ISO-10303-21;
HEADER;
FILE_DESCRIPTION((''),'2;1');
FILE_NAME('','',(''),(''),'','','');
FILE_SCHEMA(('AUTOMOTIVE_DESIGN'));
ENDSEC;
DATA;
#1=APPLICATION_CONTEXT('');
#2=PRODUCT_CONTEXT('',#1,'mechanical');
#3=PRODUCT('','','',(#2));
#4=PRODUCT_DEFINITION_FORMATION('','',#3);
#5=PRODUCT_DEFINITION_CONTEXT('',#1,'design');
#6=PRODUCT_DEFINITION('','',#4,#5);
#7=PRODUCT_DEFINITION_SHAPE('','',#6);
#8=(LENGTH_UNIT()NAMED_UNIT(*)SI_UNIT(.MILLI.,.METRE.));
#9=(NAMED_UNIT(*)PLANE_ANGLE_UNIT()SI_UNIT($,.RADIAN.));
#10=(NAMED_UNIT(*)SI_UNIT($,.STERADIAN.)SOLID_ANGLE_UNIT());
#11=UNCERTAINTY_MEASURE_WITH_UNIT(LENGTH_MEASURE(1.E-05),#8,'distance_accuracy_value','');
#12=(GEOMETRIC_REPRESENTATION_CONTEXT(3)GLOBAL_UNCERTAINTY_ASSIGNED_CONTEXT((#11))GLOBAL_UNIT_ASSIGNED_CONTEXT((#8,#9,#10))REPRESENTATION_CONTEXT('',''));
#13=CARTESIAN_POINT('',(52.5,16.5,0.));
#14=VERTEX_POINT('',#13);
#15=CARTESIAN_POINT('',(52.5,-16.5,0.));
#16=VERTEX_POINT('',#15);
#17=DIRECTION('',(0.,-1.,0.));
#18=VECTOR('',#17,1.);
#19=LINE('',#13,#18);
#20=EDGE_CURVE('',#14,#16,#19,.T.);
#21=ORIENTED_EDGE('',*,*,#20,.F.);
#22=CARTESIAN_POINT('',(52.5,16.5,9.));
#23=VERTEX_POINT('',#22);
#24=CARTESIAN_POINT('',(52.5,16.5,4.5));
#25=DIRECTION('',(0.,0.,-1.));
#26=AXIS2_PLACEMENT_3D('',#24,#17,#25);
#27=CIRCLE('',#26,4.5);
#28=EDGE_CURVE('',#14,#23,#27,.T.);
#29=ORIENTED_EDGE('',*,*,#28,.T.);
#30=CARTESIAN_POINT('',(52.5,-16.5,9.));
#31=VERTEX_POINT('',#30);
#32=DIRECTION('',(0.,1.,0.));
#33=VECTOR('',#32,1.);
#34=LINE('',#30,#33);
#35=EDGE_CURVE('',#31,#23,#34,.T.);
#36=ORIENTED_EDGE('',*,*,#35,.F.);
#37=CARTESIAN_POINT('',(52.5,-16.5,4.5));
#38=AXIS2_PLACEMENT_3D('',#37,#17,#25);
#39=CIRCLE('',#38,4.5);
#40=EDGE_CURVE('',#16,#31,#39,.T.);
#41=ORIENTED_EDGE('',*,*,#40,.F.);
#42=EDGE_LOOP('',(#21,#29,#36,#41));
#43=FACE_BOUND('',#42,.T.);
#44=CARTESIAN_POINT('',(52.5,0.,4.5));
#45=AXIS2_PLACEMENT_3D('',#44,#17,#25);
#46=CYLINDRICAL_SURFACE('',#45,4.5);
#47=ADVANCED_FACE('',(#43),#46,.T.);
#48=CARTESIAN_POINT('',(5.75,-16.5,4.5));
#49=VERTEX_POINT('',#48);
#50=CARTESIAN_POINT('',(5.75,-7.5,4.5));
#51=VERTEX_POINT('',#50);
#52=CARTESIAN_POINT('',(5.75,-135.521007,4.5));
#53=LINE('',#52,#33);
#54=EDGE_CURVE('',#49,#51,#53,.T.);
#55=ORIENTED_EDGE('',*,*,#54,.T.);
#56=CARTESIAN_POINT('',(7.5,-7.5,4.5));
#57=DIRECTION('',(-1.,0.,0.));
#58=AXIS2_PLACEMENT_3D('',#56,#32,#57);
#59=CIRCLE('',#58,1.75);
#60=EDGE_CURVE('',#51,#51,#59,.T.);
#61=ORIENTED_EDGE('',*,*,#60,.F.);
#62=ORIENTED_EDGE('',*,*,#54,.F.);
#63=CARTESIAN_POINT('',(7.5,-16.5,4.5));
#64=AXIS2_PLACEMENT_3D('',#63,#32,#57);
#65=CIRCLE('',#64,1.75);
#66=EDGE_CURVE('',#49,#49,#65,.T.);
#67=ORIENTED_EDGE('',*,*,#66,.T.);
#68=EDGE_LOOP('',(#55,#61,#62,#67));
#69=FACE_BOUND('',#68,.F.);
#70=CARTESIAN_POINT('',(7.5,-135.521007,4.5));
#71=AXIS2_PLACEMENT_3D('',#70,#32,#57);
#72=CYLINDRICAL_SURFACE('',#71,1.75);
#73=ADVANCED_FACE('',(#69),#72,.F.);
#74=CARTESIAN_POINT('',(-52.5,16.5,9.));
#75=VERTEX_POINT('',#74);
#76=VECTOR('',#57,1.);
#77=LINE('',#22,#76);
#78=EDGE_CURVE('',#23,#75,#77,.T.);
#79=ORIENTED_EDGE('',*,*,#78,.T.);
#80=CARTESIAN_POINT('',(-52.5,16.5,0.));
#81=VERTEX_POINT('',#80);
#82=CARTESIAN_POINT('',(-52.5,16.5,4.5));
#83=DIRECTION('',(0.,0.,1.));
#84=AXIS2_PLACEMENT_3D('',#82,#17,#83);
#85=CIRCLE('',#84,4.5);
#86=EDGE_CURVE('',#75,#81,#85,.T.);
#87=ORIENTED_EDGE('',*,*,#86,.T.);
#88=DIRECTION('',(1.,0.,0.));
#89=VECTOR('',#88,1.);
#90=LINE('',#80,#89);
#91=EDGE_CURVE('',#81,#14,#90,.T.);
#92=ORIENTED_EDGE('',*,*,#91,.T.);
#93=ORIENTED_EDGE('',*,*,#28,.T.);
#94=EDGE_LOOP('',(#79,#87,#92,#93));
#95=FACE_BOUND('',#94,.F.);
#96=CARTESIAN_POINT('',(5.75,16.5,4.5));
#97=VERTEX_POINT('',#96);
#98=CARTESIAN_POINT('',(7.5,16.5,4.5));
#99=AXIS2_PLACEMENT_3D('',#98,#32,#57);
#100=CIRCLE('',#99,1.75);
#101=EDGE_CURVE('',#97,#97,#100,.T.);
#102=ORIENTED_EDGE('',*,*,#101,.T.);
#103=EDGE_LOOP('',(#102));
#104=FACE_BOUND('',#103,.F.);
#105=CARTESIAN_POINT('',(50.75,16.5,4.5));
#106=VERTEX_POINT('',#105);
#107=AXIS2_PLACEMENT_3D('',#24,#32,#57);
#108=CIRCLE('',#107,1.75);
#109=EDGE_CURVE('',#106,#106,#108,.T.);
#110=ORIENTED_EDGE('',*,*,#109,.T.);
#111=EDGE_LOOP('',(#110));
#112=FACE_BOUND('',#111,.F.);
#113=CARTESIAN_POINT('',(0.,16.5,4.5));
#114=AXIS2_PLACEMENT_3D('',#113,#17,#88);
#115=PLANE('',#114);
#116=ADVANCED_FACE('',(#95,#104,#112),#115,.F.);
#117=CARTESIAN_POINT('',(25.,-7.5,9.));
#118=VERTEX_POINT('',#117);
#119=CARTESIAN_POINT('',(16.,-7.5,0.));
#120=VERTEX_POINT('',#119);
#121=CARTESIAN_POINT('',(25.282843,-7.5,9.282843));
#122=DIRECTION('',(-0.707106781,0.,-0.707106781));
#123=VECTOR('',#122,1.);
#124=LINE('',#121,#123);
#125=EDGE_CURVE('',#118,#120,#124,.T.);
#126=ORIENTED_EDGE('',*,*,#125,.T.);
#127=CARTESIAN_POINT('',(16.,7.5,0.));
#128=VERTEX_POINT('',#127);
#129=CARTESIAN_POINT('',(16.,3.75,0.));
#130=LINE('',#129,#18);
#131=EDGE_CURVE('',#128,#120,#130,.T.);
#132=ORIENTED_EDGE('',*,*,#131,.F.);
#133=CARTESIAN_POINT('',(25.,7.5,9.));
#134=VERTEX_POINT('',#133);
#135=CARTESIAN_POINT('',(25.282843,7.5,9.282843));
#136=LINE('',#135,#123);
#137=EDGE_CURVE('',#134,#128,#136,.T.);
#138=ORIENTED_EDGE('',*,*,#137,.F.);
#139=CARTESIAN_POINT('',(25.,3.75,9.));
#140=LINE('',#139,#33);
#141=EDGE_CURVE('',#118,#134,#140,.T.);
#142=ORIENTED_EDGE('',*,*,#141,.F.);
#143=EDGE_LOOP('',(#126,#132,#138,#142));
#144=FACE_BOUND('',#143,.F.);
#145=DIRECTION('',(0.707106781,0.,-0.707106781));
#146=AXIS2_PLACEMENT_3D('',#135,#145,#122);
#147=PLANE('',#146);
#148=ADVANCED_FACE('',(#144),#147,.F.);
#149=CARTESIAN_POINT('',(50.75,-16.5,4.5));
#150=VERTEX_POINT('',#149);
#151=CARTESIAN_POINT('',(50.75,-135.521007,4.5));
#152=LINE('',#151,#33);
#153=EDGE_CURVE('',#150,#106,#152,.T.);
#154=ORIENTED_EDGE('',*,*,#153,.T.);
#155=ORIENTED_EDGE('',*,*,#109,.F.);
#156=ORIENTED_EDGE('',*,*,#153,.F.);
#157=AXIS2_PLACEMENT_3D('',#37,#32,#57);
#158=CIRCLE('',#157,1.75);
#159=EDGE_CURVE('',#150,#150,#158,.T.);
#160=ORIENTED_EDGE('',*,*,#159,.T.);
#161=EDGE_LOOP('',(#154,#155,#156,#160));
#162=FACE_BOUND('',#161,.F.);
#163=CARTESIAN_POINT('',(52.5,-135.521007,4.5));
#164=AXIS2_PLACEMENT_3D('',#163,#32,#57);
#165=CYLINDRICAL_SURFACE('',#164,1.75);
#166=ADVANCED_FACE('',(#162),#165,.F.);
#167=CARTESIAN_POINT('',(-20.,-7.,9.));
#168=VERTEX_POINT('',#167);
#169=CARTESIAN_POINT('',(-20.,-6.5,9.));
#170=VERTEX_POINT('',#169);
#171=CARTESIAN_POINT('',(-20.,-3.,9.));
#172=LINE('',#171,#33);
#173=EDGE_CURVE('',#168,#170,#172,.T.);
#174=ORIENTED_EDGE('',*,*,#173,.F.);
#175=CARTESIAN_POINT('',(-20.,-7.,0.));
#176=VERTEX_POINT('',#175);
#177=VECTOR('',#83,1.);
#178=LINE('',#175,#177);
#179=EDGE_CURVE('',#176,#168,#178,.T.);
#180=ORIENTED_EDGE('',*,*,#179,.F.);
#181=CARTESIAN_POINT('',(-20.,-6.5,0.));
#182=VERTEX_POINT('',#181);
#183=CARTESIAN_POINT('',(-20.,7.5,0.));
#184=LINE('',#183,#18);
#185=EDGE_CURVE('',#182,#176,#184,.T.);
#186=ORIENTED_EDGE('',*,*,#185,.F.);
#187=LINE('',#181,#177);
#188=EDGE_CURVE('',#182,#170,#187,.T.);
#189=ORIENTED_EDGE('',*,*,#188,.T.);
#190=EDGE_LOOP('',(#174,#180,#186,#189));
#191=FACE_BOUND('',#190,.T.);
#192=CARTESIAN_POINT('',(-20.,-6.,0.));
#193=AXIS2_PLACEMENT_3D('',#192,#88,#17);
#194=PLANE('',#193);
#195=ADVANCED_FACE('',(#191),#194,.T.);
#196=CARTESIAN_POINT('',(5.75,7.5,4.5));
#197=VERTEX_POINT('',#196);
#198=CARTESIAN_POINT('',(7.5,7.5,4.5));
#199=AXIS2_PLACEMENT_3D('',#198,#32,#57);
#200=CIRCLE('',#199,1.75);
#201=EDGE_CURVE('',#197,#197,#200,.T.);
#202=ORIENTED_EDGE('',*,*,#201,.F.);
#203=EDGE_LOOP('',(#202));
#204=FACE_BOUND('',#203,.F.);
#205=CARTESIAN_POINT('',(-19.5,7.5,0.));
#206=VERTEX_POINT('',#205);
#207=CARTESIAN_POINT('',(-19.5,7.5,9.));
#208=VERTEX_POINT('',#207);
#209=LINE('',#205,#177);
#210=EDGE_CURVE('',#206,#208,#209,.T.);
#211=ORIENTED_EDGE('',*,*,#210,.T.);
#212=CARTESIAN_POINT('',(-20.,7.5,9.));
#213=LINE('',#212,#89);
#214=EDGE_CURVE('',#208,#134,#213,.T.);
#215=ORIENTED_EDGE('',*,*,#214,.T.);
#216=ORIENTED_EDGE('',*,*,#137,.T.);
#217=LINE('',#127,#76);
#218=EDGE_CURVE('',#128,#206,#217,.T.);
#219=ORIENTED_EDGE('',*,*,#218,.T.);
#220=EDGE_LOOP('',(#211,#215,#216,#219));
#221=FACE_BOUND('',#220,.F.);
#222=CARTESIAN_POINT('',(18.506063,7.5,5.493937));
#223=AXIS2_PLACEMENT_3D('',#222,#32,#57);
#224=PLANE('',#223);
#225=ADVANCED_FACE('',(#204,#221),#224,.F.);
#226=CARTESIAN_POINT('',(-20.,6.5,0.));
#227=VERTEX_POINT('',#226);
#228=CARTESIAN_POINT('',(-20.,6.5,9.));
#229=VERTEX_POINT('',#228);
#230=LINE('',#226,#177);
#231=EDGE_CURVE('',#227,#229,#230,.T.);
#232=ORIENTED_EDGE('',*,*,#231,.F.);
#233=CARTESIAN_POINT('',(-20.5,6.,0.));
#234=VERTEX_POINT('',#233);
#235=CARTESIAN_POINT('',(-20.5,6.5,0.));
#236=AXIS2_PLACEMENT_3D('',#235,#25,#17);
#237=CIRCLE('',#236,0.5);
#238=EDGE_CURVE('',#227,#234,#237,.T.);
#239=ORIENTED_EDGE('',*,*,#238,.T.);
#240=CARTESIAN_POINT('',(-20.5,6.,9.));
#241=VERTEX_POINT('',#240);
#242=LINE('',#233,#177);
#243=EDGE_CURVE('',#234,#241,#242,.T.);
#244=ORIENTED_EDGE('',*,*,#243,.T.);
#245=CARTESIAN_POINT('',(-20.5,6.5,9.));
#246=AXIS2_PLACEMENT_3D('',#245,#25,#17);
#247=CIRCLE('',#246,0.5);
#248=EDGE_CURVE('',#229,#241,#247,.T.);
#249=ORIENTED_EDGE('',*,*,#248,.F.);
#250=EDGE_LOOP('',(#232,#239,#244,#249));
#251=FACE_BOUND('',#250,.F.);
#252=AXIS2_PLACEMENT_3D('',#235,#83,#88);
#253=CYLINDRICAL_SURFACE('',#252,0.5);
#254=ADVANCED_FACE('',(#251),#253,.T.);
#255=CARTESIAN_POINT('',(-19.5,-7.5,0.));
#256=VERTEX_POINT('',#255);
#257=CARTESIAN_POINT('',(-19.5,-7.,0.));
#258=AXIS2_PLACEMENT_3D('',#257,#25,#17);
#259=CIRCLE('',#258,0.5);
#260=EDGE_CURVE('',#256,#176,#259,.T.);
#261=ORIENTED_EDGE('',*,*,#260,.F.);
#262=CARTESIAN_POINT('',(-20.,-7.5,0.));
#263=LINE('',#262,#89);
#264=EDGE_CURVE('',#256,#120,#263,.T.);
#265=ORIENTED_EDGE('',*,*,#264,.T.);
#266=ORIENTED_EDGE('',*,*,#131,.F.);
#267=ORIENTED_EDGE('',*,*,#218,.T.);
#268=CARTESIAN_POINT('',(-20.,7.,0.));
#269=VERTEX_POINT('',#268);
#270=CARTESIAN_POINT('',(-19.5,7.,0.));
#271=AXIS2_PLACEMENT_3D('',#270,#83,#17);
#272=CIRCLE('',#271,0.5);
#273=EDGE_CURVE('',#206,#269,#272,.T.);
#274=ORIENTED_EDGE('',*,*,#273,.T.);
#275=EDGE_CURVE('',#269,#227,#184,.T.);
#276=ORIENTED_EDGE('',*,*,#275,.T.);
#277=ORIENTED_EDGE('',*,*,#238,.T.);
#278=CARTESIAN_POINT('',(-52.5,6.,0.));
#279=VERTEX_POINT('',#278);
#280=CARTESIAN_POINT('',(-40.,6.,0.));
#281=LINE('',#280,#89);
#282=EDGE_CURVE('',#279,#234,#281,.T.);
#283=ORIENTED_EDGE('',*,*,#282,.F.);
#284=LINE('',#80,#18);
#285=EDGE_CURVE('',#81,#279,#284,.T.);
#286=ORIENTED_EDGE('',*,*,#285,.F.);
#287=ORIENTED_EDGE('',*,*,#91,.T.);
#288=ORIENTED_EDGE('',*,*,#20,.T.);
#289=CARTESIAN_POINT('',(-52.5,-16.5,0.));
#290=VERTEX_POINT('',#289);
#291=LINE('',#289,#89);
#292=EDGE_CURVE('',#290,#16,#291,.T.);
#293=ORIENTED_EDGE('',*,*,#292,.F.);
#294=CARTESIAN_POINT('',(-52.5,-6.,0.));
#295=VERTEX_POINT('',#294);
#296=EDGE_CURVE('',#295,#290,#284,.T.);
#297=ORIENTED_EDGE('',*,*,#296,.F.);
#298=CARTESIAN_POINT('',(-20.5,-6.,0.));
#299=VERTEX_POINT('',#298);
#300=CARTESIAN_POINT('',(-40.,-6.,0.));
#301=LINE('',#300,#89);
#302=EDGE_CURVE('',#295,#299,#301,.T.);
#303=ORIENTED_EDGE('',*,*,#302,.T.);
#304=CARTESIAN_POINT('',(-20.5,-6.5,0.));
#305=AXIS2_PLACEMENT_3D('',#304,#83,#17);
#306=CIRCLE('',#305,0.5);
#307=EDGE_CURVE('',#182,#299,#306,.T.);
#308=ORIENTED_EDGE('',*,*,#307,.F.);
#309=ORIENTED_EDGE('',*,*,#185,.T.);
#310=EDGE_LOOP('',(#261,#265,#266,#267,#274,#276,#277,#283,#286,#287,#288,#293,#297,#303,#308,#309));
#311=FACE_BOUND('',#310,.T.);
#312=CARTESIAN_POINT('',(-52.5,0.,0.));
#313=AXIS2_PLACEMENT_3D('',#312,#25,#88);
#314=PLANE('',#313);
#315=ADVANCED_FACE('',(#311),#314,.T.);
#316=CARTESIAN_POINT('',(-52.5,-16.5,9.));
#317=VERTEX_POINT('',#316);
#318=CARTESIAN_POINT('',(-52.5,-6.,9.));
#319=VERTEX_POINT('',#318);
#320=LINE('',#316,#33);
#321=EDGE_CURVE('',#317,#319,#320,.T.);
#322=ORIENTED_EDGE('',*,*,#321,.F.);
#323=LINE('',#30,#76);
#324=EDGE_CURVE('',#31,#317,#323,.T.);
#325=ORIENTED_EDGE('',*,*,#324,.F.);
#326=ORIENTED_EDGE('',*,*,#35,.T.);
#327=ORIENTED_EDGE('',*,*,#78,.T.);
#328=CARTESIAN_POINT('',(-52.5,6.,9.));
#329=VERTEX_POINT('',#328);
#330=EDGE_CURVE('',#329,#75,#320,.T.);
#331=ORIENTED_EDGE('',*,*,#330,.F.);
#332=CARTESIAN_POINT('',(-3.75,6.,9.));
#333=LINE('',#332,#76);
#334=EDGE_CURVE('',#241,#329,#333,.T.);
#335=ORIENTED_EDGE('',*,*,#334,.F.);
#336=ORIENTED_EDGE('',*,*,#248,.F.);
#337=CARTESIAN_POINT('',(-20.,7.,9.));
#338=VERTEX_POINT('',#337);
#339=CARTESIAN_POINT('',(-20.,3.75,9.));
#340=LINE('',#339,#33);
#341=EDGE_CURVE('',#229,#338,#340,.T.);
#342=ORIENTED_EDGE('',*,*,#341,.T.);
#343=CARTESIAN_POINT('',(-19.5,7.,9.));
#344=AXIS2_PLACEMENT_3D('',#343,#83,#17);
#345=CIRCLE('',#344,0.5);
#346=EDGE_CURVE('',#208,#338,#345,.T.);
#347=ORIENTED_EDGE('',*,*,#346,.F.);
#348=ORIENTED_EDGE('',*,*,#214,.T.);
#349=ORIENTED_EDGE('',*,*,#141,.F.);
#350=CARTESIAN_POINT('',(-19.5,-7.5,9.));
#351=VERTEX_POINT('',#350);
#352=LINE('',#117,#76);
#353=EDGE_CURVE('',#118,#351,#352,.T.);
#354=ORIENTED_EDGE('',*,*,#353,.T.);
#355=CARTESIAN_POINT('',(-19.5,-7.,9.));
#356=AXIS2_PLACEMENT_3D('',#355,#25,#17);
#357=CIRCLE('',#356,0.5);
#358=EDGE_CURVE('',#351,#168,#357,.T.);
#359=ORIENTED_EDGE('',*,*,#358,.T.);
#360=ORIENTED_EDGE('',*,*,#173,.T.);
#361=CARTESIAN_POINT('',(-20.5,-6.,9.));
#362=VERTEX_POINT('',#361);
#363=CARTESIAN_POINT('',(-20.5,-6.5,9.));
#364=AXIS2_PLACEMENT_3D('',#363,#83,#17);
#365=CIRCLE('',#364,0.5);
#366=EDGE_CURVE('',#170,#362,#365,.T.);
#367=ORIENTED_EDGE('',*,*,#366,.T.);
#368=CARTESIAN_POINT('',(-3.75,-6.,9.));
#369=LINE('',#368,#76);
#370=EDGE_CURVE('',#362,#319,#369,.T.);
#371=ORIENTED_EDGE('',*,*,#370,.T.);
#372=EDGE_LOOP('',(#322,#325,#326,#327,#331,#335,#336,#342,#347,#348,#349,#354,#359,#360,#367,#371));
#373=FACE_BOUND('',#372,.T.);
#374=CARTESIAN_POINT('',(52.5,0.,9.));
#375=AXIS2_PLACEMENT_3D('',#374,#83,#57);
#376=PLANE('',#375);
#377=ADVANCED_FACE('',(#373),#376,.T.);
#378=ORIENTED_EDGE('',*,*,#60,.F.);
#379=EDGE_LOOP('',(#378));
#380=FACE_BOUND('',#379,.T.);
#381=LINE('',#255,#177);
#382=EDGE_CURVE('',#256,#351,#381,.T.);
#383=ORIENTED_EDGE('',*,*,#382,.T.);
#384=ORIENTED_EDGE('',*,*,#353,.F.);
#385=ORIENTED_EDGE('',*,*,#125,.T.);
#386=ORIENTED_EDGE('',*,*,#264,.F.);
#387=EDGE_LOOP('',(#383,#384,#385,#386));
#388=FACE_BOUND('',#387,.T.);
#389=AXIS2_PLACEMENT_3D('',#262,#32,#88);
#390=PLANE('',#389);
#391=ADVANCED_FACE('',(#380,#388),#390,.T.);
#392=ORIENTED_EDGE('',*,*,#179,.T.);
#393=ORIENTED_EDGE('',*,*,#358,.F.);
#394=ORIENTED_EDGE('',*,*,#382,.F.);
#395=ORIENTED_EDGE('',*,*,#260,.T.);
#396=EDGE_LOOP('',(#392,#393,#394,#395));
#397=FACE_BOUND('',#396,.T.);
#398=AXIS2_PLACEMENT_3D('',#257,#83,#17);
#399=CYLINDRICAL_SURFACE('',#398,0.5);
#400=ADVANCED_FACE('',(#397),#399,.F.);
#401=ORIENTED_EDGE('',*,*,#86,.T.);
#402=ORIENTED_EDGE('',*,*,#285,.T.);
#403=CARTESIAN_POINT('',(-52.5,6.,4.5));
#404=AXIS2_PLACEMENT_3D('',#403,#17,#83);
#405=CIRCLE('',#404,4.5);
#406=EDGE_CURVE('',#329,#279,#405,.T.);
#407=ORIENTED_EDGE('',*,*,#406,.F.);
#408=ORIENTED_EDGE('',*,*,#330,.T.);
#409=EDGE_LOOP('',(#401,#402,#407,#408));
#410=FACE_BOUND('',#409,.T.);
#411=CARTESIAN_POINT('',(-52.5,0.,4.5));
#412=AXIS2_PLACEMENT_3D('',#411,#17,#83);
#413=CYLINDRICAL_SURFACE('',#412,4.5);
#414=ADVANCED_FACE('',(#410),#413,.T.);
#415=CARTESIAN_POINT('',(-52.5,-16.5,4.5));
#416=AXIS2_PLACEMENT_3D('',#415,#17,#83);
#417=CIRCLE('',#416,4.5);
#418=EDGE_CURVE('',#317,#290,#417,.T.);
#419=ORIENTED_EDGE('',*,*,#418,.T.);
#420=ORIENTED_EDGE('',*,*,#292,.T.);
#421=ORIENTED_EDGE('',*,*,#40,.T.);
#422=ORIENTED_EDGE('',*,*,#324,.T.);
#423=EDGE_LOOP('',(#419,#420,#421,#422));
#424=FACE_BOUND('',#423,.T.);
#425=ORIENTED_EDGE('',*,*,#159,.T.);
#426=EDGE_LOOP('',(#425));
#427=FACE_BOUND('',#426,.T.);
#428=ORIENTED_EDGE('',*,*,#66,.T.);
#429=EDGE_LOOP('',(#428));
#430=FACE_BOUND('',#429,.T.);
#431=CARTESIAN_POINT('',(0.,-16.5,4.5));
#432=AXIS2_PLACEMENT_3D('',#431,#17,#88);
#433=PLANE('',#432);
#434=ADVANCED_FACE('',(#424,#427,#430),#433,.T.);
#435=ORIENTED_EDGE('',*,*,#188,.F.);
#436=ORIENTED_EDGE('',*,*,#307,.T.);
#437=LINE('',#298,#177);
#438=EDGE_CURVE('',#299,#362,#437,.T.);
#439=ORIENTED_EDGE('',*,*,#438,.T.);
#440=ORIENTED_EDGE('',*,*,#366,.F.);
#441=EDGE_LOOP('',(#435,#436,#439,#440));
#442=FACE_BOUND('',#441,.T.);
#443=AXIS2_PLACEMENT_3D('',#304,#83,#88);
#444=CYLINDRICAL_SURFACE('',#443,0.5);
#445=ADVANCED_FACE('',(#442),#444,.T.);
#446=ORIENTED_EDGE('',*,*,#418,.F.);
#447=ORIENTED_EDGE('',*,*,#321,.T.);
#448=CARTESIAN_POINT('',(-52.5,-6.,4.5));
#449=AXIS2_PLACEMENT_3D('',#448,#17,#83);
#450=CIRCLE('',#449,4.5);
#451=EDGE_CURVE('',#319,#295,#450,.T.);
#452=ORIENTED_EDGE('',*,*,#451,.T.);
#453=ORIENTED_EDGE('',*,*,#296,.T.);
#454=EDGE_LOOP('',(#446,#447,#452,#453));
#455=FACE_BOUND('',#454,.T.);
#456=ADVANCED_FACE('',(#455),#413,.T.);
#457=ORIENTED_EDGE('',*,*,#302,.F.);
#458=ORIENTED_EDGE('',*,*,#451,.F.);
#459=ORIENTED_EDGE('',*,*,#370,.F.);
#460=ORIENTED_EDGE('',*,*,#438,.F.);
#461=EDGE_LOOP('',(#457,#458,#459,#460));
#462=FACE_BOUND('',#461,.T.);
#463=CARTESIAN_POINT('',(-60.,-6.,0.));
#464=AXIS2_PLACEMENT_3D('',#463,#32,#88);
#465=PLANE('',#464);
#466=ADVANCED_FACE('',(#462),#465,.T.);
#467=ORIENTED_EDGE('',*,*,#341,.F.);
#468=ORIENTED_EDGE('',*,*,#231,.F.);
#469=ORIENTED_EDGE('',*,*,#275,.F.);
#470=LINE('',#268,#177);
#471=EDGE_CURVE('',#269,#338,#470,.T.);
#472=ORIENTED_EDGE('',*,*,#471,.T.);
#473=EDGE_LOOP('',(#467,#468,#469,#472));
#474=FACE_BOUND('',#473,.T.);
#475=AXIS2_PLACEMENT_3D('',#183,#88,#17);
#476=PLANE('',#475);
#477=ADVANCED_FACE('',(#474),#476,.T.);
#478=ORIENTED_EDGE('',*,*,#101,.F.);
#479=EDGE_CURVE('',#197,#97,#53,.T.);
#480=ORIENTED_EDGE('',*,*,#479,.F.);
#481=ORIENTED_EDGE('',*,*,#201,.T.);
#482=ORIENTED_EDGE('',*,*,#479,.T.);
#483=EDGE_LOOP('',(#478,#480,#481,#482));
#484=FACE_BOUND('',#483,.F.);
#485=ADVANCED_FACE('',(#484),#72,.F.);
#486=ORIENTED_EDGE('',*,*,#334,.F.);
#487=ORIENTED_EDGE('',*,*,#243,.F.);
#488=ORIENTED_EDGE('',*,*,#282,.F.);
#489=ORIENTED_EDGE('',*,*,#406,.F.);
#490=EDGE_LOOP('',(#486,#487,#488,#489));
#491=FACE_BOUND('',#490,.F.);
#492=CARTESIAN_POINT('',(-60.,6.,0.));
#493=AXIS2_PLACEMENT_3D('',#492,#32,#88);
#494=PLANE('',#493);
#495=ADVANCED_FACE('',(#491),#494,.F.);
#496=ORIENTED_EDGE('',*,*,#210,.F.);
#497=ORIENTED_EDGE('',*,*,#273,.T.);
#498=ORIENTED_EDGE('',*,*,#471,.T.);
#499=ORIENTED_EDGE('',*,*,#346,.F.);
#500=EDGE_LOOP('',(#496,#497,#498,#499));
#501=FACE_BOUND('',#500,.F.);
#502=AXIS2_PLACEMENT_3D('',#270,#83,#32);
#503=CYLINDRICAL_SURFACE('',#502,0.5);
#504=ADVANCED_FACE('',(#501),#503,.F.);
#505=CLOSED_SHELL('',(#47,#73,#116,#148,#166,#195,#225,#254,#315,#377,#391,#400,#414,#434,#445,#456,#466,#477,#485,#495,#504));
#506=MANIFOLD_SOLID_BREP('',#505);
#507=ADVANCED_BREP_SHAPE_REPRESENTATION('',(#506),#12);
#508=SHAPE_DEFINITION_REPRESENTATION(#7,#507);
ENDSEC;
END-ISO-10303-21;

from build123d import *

# Parameters (mm, degrees)
F1_DEPTH    = 16.5
F3_D        = 3.5
F4_W        = 40
F4_H        = 12
F5_DEPTH    = 25
F7_T1_DEPTH = 15
F8_R        = 0.5


# Not quite as in the source:
# - a fillet or chamfer that OpenCascade refuses, or shapes differently, is made with other operations: its cross-section is extruded or revolved along the edge and cut away or added


with BuildPart() as f1:
    # F0 (on Front) → F1 (new body, symmetric)
    with BuildSketch(Plane.XZ):
        with BuildLine():
            ThreePointArc((-52.5, 9), (-57, 4.5), (-52.5, 0))
            Line((-52.5, 0), (52.5, 0))
            ThreePointArc((52.5, 0), (57, 4.5), (52.5, 9))
            Line((52.5, 9), (-52.5, 9))
        make_face()
    extrude(amount=F1_DEPTH, both=True)

    # F3 (through all)
    with Locations(Plane.XZ.offset(16.5)):
        with Locations((7.5, 4.5), (52.5, 4.5)):
            Hole(F3_D / 2)


with BuildPart() as f5:
    # F4 (on Top) → F5 (new body)
    with BuildSketch(Plane.XY):
        Polygon((15, 7.5), (-20, 7.5), (-20, 6), (-20, -6), (-20, -7.5), (15, -7.5), align=None)
        with Locations((-40, 0)):
            Rectangle(F4_W, F4_H)
    extrude(amount=F5_DEPTH)


with BuildPart() as f1_1:
    add(f1.part)

    # F6: cut F5
    add(f5.part, mode=Mode.SUBTRACT)

    # F7: chamfer of 10 on 1 edges, made by hand

    # F7_s2 → F7_t1 (cut)
    with BuildSketch(Plane.XZ.offset(-7.5)):
        with BuildLine():
            Line((25.2828427125, 9.2828427125), (14.7171572875, -1.2828427125))
            Line((14.7171572875, -1.2828427125), (14.5171572875, -1.2828427125))
            ThreePointArc((14.5171572875, -1.2828427125), (14.8, 3.8585786438), (14.8, 9))
            Line((14.8, 9), (15, 9.2))
            ThreePointArc((15, 9.2), (20.1414213562, 9.2), (25.2828427125, 9.4828427125))
            Line((25.2828427125, 9.4828427125), (25.2828427125, 9.2828427125))
        make_face()
    extrude(amount=F7_T1_DEPTH, mode=Mode.SUBTRACT)

    # F8
    f8_edges = [f1_1.edges().sort_by_distance(p)[0] for p in [
        (-20, 7.5, 4.5),
        (-20, 6, 4.5),
        (-20, -7.5, 4.5),
        (-20, -6, 4.5),
    ]]
    fillet(f8_edges, radius=F8_R)


solid = f1_1.part
